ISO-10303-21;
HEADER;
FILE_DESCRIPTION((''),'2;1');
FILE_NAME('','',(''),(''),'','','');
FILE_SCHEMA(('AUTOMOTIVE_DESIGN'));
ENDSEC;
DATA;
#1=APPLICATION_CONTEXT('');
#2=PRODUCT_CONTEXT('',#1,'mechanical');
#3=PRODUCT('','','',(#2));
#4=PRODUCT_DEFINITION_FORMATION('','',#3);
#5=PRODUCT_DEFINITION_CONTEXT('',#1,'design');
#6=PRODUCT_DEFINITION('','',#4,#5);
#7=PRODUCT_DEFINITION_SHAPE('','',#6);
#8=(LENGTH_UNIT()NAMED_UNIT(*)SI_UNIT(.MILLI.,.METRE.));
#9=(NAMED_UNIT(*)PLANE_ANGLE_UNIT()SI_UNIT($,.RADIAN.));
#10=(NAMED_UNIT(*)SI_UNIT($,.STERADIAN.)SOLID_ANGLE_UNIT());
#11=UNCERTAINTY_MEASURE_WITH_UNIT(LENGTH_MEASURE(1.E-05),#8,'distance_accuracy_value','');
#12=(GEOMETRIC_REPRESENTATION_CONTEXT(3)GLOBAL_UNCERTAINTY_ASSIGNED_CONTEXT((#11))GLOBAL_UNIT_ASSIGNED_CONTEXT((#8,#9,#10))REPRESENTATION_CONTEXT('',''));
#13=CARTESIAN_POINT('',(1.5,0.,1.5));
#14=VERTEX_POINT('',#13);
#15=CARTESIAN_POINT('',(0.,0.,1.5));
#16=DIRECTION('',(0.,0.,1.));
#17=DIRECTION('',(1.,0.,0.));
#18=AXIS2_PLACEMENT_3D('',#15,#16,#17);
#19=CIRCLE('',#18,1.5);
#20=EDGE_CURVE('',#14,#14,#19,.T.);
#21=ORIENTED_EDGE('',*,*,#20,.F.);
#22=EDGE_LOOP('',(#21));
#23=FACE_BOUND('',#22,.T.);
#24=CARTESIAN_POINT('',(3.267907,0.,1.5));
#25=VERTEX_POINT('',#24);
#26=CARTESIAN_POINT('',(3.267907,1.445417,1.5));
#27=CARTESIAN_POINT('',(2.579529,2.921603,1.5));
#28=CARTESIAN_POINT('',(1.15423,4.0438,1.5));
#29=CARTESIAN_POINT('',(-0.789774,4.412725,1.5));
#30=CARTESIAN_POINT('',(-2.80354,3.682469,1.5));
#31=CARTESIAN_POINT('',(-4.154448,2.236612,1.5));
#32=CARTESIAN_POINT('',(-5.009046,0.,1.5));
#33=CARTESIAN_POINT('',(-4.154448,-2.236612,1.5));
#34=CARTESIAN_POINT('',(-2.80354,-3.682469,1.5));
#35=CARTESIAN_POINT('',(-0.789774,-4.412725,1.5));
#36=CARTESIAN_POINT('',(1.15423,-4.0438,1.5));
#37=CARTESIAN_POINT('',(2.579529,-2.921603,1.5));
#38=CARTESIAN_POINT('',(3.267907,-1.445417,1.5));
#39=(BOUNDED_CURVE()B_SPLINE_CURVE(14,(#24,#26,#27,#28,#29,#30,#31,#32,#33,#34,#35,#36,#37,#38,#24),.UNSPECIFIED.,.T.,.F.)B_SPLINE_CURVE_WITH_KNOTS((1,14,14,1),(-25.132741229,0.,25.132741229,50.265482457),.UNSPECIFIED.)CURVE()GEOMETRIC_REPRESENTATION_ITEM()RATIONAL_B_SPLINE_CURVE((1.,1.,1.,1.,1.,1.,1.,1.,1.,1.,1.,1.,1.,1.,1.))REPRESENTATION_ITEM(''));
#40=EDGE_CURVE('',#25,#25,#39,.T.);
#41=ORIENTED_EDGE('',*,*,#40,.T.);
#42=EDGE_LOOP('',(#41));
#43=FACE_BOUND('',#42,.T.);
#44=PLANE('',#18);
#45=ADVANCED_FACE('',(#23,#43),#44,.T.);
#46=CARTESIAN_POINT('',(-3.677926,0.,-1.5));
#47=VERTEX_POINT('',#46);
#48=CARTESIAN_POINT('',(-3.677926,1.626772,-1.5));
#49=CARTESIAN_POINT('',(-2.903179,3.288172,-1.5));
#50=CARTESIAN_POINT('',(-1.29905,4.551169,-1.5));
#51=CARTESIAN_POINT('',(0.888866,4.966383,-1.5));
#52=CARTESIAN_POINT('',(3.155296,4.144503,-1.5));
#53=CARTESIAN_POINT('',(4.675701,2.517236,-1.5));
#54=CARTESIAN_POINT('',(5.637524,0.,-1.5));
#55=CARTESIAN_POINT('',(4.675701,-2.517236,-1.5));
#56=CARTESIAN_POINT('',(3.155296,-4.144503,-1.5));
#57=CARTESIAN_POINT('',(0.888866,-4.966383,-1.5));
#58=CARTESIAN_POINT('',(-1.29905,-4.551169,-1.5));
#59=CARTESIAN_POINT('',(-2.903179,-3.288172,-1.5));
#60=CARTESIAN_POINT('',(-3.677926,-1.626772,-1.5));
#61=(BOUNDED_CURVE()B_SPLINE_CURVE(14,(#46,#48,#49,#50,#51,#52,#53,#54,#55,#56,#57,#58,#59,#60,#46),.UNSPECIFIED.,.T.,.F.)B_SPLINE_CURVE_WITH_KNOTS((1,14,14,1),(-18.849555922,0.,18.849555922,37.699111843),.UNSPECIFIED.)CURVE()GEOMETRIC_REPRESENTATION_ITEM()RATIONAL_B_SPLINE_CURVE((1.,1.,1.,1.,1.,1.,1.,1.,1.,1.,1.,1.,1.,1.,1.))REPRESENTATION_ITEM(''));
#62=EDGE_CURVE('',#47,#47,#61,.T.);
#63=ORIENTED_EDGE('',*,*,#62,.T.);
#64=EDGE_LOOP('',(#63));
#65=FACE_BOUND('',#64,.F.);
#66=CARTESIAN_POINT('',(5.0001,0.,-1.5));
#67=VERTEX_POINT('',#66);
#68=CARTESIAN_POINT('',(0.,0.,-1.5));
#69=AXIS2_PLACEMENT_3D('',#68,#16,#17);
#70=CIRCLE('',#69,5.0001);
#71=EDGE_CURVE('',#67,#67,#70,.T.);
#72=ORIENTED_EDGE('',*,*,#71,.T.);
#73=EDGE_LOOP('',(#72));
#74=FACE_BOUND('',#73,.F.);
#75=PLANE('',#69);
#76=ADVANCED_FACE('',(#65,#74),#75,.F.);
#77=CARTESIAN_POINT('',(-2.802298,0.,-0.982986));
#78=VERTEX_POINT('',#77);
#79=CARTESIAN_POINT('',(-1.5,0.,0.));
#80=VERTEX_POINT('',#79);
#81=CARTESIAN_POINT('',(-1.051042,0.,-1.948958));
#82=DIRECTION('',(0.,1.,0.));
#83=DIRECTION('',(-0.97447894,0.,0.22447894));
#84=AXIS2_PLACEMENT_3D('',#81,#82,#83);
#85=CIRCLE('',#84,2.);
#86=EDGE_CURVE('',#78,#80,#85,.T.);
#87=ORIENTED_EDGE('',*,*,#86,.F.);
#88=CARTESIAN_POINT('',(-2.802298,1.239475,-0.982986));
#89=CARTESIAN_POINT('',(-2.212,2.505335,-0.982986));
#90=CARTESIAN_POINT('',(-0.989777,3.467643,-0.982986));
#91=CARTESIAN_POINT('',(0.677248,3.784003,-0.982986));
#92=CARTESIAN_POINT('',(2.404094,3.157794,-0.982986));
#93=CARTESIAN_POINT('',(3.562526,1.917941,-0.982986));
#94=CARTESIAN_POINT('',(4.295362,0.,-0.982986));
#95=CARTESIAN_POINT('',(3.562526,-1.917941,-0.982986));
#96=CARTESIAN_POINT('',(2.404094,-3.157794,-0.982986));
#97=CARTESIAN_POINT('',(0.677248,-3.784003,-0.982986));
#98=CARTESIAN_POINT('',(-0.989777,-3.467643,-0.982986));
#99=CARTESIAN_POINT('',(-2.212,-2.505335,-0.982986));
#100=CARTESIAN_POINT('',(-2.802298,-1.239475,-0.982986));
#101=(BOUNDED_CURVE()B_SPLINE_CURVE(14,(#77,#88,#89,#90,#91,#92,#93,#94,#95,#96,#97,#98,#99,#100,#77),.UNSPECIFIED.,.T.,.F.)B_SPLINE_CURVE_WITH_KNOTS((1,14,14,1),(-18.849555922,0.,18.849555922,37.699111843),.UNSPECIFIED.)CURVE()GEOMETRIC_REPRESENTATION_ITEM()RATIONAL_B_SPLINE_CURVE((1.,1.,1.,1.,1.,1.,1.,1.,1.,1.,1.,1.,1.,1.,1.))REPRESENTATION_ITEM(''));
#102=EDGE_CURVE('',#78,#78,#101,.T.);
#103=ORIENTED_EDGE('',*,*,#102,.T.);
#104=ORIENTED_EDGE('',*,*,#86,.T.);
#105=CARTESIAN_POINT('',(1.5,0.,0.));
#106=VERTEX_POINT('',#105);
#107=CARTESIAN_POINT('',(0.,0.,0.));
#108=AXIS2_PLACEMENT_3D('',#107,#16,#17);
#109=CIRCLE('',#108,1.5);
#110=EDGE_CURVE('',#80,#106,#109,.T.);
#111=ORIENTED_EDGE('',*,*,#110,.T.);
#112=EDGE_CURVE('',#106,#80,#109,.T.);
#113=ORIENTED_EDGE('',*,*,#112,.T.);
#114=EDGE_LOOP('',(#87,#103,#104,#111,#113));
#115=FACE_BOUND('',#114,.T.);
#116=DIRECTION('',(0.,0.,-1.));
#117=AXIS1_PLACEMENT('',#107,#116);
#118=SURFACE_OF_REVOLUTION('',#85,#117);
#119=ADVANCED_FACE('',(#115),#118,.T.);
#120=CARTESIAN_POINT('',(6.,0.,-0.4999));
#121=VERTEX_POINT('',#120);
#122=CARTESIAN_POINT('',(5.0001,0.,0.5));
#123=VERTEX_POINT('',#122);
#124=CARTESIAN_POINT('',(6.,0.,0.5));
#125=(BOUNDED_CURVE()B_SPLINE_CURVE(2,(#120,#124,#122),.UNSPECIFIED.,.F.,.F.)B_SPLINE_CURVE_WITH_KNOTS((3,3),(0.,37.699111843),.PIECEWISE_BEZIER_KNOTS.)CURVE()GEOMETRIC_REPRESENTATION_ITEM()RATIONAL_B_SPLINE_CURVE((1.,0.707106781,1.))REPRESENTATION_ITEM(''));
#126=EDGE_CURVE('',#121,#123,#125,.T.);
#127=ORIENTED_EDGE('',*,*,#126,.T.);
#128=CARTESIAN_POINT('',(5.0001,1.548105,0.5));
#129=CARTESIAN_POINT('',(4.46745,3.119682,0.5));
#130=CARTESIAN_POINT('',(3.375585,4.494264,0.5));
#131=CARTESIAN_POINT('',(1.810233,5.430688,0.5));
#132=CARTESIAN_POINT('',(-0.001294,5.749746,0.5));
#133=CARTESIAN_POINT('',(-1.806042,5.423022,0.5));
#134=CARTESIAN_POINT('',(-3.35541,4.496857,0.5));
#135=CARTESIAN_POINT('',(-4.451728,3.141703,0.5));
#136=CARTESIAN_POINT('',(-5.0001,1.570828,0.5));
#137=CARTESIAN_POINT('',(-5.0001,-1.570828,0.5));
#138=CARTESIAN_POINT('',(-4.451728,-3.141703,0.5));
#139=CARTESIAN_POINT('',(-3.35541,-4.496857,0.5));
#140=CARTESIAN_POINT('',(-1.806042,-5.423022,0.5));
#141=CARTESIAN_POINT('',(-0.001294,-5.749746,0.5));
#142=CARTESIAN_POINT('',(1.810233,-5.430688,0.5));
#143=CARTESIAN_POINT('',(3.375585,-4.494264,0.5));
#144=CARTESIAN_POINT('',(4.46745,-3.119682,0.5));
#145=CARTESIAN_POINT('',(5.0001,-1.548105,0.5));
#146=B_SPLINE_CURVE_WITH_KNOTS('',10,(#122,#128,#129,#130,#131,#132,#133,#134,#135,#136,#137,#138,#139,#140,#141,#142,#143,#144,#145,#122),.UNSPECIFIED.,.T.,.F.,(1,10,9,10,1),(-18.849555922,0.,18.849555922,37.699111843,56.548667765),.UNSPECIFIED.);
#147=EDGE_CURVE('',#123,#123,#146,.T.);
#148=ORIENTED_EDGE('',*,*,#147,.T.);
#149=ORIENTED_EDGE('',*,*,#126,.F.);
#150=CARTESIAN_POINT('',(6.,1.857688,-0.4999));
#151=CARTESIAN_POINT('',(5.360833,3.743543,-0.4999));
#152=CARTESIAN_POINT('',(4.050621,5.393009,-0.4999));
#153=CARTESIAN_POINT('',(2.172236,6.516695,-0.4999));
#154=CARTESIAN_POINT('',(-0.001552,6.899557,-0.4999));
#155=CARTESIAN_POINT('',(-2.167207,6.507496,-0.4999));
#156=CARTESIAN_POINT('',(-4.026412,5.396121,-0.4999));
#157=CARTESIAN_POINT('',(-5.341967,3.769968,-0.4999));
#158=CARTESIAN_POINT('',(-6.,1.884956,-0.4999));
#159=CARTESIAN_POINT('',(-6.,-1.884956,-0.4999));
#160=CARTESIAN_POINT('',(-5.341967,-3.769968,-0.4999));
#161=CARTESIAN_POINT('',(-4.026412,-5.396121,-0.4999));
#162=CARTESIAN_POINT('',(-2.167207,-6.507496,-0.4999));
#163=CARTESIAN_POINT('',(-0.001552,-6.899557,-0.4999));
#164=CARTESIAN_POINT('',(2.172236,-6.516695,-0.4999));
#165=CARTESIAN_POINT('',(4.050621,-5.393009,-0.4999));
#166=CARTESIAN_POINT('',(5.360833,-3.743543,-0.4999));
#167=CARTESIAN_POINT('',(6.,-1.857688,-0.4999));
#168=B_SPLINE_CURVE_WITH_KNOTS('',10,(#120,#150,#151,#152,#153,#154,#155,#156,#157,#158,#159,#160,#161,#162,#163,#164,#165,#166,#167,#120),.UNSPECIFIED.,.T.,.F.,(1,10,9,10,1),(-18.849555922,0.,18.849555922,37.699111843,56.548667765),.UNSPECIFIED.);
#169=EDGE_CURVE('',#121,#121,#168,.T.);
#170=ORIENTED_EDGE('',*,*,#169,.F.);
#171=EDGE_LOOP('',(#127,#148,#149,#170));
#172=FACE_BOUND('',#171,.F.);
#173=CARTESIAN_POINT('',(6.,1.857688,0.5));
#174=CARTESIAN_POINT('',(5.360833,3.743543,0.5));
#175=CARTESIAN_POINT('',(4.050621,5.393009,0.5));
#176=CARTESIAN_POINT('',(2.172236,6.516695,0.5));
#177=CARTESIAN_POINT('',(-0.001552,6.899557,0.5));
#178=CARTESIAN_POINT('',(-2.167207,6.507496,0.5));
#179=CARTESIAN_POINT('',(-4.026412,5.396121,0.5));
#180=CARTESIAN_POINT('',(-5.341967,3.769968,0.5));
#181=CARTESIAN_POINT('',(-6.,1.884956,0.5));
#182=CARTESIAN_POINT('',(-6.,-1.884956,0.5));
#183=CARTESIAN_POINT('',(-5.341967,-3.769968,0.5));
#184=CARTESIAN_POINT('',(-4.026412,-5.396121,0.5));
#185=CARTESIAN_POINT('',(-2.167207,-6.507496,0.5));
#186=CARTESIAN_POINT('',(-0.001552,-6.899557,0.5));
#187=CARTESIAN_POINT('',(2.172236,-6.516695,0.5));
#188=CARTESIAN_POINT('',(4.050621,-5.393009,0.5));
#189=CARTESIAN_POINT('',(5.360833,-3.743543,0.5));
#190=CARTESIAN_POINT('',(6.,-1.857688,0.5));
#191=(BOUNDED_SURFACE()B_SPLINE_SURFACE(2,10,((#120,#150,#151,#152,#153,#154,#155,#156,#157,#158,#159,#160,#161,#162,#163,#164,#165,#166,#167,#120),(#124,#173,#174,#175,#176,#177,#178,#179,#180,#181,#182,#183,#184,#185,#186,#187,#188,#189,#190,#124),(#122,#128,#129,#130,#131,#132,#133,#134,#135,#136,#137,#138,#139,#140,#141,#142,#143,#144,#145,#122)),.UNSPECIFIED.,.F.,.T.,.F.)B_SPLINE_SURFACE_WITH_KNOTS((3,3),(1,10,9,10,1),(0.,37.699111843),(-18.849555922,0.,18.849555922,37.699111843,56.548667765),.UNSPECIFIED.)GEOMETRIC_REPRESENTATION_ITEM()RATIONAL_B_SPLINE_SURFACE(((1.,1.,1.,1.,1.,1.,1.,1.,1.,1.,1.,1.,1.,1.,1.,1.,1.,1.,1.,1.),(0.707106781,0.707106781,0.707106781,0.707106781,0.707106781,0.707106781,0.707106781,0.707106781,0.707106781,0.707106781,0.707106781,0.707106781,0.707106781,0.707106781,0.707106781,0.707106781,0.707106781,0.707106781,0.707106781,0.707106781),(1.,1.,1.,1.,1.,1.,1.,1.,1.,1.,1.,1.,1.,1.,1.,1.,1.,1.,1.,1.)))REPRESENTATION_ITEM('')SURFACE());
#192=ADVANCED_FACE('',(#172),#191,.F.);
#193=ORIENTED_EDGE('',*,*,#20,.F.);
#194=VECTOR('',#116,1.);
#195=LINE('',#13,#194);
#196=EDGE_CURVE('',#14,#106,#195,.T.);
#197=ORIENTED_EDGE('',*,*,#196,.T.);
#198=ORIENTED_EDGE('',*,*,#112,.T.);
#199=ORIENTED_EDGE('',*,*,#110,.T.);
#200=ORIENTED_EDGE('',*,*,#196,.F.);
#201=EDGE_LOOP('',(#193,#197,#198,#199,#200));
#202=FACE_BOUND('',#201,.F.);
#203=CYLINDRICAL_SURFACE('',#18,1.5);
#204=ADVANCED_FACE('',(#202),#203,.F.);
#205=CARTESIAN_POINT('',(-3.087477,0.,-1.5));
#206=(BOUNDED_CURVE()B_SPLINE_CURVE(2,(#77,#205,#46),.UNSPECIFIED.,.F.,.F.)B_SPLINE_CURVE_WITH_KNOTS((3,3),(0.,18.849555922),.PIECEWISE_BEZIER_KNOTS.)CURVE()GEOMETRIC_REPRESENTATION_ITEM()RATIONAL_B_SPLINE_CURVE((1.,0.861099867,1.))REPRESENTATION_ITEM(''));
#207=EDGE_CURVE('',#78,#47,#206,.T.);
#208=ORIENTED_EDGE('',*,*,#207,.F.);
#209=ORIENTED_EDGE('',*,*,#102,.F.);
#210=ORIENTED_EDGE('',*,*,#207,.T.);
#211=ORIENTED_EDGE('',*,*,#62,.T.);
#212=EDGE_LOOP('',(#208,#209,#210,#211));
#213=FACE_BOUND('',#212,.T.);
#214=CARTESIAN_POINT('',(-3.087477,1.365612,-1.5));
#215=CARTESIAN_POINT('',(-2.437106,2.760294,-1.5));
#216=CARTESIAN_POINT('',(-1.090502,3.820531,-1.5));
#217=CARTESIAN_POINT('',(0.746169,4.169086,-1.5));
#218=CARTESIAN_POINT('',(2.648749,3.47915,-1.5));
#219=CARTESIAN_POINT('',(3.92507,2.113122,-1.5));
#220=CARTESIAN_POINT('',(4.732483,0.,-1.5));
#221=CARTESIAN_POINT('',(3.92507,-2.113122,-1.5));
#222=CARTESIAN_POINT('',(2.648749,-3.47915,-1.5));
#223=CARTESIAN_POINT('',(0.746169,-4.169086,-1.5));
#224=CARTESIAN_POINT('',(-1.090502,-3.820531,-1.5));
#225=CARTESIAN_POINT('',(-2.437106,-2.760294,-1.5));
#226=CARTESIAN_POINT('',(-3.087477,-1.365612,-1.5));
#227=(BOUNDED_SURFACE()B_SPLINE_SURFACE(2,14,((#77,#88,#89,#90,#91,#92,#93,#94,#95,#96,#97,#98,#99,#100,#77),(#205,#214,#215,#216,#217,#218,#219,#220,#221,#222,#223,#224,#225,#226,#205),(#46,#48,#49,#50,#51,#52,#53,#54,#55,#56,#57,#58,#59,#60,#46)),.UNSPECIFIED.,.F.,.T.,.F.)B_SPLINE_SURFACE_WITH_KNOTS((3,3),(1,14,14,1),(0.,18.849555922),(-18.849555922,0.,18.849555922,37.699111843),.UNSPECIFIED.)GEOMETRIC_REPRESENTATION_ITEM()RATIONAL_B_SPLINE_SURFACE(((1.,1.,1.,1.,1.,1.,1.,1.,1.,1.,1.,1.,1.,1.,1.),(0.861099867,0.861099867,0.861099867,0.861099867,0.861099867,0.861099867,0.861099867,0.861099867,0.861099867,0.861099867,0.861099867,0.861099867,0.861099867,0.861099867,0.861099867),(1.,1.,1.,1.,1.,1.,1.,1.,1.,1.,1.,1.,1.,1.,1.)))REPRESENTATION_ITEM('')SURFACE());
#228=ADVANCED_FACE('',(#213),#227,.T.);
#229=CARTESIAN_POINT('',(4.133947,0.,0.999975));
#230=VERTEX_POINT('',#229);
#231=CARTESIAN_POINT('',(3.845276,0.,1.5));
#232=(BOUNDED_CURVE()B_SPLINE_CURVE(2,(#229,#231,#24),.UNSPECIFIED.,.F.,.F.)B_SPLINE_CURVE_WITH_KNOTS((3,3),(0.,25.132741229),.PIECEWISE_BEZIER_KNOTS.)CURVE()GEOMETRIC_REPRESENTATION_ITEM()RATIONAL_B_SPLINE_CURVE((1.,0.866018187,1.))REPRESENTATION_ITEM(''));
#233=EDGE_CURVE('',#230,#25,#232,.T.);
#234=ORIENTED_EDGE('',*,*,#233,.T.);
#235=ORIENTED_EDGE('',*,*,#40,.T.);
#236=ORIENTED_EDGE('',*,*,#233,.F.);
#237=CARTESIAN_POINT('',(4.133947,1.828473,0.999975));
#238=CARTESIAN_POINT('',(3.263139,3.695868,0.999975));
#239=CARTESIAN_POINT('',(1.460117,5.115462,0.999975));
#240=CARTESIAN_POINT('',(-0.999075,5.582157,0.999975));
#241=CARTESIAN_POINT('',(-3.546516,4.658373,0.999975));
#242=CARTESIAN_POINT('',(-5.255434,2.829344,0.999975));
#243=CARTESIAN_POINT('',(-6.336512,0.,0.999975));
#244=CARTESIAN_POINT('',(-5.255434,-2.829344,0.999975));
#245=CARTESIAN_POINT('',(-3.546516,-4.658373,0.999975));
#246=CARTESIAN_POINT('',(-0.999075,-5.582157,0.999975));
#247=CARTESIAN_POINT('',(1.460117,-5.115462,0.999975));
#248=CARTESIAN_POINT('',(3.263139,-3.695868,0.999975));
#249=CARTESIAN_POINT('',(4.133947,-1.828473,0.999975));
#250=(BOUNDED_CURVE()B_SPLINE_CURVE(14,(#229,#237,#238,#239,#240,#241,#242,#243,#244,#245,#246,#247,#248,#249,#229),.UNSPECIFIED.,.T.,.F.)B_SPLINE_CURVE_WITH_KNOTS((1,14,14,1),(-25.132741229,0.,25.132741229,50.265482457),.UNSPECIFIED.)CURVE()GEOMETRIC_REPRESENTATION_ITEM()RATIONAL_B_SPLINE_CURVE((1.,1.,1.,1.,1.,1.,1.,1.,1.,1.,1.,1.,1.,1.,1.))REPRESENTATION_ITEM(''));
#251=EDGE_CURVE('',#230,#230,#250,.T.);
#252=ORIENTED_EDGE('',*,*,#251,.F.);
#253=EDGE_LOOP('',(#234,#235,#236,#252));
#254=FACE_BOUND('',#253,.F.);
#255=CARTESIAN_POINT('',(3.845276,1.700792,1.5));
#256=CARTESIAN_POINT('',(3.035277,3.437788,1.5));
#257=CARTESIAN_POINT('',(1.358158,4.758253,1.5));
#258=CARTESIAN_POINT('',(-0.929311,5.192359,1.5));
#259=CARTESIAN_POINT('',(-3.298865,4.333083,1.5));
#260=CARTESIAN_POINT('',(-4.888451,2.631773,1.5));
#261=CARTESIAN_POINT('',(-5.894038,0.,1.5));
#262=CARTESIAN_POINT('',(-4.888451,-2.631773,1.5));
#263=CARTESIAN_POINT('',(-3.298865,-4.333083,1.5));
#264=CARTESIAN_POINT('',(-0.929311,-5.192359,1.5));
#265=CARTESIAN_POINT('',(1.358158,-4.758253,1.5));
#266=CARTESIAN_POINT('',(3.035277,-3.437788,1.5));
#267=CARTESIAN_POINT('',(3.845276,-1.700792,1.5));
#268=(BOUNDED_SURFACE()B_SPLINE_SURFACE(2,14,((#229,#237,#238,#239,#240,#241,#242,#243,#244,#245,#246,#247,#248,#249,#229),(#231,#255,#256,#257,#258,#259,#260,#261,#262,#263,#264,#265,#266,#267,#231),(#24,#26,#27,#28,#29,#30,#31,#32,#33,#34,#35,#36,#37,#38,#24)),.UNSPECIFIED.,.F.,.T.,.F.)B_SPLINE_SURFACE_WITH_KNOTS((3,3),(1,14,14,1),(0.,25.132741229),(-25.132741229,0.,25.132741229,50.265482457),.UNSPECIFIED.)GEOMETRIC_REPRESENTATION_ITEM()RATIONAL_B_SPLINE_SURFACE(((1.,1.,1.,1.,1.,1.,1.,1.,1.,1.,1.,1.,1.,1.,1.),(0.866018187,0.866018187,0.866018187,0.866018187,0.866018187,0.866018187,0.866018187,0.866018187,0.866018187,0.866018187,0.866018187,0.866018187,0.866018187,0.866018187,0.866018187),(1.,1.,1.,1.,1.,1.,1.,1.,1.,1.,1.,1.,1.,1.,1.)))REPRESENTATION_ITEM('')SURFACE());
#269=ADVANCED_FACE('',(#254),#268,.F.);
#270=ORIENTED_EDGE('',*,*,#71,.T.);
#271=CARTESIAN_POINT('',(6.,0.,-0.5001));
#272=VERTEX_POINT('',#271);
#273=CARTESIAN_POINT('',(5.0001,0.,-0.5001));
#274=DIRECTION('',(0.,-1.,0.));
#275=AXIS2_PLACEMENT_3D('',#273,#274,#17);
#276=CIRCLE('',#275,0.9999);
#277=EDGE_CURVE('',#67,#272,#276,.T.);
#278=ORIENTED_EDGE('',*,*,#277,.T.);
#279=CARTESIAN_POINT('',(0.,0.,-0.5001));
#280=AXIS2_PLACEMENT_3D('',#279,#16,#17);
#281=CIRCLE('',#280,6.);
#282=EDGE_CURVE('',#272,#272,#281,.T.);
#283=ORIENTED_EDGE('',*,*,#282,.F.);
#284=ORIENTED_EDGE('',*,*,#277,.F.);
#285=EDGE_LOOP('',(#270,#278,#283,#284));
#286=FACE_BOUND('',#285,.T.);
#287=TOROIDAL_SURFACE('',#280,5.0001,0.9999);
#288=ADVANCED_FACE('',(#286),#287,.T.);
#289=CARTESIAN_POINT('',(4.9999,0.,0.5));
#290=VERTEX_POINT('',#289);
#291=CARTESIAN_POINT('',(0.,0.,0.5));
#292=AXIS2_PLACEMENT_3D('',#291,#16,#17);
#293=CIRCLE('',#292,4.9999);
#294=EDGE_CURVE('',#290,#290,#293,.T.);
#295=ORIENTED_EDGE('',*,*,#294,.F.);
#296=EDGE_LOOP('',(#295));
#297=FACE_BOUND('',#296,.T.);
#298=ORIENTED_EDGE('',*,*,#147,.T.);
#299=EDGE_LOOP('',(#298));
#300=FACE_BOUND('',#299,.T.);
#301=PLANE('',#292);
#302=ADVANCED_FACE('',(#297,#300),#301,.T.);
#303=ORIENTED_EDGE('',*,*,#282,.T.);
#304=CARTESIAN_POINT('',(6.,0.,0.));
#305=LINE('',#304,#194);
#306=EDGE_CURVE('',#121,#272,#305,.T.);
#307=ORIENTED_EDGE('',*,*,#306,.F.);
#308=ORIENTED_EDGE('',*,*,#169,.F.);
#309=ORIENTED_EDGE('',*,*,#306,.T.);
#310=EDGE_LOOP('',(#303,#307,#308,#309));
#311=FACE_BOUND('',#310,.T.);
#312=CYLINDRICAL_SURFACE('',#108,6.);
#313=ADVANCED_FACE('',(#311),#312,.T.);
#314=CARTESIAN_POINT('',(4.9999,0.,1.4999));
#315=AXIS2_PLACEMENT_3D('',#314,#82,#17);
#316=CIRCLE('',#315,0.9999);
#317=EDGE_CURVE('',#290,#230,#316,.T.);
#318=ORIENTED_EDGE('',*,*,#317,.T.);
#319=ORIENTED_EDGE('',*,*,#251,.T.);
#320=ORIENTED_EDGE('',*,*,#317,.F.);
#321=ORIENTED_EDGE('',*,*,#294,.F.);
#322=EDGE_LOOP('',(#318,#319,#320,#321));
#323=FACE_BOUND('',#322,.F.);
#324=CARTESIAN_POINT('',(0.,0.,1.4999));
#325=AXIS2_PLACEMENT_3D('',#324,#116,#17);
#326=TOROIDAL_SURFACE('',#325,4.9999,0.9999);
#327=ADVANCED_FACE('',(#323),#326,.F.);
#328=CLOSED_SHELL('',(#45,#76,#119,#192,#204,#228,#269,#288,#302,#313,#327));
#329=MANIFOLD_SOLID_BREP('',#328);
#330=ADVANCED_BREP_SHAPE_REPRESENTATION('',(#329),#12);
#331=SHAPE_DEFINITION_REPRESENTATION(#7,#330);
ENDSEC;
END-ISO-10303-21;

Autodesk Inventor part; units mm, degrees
sketch "Skizze1" plane through (0, 0, 0) normal (0, 0, 1) x (1, 0, 0)
  circle A0 centre (0, 0) radius 6
  dimension "d0" = 12
extrude "Extrusion1" add sketch "Skizze1" along normal mid plane 3
sketch "Skizze2" plane through (0, 0, 1.5) normal (0, 0, 1) x (1, 0, 0)
  circle A0 centre (0, 0) radius 6 projected
  circle A1 centre (0, 0) radius 4
  dimension "d3" = 8
extrude "Extrusion2" cut sketch "Skizze2" against normal blind 1
sketch "Skizze3" plane through (0, 0, 1.5) normal (0, 0, 1) x (1, 0, 0)
  circle A0 centre (0, 0) radius 1.5
  dimension "d6" = 3
extrude "Extrusion3" cut sketch "Skizze3" against normal blind 5
sketch "Skizze4" plane through (0, 0, -1.5) normal (0, 0, -1) x (-1, 0, 0)
  circle A0 centre (0, 0) radius 1.5 projected
  circle A1 centre (0, 0) radius 3
  dimension "d9" = 1.5
extrude "Extrusion4" cut sketch "Skizze4" against normal blind 1.5
fillet "Rundung1" radius 2 1 edges at (3, 0, 0)
fillet "Rundung2" radius 1 2 edges at (-4, 0, 0.5) (-4, 0, 1.5)
fillet "Rundung3" radius 1 1 edges at (3, 0, -1.5)
fillet "Rundung4" radius 1 2 edges at (-6, 0, -1.5) (-6, 0, 0.5)
properties part number "LenkStangeSicherung"
